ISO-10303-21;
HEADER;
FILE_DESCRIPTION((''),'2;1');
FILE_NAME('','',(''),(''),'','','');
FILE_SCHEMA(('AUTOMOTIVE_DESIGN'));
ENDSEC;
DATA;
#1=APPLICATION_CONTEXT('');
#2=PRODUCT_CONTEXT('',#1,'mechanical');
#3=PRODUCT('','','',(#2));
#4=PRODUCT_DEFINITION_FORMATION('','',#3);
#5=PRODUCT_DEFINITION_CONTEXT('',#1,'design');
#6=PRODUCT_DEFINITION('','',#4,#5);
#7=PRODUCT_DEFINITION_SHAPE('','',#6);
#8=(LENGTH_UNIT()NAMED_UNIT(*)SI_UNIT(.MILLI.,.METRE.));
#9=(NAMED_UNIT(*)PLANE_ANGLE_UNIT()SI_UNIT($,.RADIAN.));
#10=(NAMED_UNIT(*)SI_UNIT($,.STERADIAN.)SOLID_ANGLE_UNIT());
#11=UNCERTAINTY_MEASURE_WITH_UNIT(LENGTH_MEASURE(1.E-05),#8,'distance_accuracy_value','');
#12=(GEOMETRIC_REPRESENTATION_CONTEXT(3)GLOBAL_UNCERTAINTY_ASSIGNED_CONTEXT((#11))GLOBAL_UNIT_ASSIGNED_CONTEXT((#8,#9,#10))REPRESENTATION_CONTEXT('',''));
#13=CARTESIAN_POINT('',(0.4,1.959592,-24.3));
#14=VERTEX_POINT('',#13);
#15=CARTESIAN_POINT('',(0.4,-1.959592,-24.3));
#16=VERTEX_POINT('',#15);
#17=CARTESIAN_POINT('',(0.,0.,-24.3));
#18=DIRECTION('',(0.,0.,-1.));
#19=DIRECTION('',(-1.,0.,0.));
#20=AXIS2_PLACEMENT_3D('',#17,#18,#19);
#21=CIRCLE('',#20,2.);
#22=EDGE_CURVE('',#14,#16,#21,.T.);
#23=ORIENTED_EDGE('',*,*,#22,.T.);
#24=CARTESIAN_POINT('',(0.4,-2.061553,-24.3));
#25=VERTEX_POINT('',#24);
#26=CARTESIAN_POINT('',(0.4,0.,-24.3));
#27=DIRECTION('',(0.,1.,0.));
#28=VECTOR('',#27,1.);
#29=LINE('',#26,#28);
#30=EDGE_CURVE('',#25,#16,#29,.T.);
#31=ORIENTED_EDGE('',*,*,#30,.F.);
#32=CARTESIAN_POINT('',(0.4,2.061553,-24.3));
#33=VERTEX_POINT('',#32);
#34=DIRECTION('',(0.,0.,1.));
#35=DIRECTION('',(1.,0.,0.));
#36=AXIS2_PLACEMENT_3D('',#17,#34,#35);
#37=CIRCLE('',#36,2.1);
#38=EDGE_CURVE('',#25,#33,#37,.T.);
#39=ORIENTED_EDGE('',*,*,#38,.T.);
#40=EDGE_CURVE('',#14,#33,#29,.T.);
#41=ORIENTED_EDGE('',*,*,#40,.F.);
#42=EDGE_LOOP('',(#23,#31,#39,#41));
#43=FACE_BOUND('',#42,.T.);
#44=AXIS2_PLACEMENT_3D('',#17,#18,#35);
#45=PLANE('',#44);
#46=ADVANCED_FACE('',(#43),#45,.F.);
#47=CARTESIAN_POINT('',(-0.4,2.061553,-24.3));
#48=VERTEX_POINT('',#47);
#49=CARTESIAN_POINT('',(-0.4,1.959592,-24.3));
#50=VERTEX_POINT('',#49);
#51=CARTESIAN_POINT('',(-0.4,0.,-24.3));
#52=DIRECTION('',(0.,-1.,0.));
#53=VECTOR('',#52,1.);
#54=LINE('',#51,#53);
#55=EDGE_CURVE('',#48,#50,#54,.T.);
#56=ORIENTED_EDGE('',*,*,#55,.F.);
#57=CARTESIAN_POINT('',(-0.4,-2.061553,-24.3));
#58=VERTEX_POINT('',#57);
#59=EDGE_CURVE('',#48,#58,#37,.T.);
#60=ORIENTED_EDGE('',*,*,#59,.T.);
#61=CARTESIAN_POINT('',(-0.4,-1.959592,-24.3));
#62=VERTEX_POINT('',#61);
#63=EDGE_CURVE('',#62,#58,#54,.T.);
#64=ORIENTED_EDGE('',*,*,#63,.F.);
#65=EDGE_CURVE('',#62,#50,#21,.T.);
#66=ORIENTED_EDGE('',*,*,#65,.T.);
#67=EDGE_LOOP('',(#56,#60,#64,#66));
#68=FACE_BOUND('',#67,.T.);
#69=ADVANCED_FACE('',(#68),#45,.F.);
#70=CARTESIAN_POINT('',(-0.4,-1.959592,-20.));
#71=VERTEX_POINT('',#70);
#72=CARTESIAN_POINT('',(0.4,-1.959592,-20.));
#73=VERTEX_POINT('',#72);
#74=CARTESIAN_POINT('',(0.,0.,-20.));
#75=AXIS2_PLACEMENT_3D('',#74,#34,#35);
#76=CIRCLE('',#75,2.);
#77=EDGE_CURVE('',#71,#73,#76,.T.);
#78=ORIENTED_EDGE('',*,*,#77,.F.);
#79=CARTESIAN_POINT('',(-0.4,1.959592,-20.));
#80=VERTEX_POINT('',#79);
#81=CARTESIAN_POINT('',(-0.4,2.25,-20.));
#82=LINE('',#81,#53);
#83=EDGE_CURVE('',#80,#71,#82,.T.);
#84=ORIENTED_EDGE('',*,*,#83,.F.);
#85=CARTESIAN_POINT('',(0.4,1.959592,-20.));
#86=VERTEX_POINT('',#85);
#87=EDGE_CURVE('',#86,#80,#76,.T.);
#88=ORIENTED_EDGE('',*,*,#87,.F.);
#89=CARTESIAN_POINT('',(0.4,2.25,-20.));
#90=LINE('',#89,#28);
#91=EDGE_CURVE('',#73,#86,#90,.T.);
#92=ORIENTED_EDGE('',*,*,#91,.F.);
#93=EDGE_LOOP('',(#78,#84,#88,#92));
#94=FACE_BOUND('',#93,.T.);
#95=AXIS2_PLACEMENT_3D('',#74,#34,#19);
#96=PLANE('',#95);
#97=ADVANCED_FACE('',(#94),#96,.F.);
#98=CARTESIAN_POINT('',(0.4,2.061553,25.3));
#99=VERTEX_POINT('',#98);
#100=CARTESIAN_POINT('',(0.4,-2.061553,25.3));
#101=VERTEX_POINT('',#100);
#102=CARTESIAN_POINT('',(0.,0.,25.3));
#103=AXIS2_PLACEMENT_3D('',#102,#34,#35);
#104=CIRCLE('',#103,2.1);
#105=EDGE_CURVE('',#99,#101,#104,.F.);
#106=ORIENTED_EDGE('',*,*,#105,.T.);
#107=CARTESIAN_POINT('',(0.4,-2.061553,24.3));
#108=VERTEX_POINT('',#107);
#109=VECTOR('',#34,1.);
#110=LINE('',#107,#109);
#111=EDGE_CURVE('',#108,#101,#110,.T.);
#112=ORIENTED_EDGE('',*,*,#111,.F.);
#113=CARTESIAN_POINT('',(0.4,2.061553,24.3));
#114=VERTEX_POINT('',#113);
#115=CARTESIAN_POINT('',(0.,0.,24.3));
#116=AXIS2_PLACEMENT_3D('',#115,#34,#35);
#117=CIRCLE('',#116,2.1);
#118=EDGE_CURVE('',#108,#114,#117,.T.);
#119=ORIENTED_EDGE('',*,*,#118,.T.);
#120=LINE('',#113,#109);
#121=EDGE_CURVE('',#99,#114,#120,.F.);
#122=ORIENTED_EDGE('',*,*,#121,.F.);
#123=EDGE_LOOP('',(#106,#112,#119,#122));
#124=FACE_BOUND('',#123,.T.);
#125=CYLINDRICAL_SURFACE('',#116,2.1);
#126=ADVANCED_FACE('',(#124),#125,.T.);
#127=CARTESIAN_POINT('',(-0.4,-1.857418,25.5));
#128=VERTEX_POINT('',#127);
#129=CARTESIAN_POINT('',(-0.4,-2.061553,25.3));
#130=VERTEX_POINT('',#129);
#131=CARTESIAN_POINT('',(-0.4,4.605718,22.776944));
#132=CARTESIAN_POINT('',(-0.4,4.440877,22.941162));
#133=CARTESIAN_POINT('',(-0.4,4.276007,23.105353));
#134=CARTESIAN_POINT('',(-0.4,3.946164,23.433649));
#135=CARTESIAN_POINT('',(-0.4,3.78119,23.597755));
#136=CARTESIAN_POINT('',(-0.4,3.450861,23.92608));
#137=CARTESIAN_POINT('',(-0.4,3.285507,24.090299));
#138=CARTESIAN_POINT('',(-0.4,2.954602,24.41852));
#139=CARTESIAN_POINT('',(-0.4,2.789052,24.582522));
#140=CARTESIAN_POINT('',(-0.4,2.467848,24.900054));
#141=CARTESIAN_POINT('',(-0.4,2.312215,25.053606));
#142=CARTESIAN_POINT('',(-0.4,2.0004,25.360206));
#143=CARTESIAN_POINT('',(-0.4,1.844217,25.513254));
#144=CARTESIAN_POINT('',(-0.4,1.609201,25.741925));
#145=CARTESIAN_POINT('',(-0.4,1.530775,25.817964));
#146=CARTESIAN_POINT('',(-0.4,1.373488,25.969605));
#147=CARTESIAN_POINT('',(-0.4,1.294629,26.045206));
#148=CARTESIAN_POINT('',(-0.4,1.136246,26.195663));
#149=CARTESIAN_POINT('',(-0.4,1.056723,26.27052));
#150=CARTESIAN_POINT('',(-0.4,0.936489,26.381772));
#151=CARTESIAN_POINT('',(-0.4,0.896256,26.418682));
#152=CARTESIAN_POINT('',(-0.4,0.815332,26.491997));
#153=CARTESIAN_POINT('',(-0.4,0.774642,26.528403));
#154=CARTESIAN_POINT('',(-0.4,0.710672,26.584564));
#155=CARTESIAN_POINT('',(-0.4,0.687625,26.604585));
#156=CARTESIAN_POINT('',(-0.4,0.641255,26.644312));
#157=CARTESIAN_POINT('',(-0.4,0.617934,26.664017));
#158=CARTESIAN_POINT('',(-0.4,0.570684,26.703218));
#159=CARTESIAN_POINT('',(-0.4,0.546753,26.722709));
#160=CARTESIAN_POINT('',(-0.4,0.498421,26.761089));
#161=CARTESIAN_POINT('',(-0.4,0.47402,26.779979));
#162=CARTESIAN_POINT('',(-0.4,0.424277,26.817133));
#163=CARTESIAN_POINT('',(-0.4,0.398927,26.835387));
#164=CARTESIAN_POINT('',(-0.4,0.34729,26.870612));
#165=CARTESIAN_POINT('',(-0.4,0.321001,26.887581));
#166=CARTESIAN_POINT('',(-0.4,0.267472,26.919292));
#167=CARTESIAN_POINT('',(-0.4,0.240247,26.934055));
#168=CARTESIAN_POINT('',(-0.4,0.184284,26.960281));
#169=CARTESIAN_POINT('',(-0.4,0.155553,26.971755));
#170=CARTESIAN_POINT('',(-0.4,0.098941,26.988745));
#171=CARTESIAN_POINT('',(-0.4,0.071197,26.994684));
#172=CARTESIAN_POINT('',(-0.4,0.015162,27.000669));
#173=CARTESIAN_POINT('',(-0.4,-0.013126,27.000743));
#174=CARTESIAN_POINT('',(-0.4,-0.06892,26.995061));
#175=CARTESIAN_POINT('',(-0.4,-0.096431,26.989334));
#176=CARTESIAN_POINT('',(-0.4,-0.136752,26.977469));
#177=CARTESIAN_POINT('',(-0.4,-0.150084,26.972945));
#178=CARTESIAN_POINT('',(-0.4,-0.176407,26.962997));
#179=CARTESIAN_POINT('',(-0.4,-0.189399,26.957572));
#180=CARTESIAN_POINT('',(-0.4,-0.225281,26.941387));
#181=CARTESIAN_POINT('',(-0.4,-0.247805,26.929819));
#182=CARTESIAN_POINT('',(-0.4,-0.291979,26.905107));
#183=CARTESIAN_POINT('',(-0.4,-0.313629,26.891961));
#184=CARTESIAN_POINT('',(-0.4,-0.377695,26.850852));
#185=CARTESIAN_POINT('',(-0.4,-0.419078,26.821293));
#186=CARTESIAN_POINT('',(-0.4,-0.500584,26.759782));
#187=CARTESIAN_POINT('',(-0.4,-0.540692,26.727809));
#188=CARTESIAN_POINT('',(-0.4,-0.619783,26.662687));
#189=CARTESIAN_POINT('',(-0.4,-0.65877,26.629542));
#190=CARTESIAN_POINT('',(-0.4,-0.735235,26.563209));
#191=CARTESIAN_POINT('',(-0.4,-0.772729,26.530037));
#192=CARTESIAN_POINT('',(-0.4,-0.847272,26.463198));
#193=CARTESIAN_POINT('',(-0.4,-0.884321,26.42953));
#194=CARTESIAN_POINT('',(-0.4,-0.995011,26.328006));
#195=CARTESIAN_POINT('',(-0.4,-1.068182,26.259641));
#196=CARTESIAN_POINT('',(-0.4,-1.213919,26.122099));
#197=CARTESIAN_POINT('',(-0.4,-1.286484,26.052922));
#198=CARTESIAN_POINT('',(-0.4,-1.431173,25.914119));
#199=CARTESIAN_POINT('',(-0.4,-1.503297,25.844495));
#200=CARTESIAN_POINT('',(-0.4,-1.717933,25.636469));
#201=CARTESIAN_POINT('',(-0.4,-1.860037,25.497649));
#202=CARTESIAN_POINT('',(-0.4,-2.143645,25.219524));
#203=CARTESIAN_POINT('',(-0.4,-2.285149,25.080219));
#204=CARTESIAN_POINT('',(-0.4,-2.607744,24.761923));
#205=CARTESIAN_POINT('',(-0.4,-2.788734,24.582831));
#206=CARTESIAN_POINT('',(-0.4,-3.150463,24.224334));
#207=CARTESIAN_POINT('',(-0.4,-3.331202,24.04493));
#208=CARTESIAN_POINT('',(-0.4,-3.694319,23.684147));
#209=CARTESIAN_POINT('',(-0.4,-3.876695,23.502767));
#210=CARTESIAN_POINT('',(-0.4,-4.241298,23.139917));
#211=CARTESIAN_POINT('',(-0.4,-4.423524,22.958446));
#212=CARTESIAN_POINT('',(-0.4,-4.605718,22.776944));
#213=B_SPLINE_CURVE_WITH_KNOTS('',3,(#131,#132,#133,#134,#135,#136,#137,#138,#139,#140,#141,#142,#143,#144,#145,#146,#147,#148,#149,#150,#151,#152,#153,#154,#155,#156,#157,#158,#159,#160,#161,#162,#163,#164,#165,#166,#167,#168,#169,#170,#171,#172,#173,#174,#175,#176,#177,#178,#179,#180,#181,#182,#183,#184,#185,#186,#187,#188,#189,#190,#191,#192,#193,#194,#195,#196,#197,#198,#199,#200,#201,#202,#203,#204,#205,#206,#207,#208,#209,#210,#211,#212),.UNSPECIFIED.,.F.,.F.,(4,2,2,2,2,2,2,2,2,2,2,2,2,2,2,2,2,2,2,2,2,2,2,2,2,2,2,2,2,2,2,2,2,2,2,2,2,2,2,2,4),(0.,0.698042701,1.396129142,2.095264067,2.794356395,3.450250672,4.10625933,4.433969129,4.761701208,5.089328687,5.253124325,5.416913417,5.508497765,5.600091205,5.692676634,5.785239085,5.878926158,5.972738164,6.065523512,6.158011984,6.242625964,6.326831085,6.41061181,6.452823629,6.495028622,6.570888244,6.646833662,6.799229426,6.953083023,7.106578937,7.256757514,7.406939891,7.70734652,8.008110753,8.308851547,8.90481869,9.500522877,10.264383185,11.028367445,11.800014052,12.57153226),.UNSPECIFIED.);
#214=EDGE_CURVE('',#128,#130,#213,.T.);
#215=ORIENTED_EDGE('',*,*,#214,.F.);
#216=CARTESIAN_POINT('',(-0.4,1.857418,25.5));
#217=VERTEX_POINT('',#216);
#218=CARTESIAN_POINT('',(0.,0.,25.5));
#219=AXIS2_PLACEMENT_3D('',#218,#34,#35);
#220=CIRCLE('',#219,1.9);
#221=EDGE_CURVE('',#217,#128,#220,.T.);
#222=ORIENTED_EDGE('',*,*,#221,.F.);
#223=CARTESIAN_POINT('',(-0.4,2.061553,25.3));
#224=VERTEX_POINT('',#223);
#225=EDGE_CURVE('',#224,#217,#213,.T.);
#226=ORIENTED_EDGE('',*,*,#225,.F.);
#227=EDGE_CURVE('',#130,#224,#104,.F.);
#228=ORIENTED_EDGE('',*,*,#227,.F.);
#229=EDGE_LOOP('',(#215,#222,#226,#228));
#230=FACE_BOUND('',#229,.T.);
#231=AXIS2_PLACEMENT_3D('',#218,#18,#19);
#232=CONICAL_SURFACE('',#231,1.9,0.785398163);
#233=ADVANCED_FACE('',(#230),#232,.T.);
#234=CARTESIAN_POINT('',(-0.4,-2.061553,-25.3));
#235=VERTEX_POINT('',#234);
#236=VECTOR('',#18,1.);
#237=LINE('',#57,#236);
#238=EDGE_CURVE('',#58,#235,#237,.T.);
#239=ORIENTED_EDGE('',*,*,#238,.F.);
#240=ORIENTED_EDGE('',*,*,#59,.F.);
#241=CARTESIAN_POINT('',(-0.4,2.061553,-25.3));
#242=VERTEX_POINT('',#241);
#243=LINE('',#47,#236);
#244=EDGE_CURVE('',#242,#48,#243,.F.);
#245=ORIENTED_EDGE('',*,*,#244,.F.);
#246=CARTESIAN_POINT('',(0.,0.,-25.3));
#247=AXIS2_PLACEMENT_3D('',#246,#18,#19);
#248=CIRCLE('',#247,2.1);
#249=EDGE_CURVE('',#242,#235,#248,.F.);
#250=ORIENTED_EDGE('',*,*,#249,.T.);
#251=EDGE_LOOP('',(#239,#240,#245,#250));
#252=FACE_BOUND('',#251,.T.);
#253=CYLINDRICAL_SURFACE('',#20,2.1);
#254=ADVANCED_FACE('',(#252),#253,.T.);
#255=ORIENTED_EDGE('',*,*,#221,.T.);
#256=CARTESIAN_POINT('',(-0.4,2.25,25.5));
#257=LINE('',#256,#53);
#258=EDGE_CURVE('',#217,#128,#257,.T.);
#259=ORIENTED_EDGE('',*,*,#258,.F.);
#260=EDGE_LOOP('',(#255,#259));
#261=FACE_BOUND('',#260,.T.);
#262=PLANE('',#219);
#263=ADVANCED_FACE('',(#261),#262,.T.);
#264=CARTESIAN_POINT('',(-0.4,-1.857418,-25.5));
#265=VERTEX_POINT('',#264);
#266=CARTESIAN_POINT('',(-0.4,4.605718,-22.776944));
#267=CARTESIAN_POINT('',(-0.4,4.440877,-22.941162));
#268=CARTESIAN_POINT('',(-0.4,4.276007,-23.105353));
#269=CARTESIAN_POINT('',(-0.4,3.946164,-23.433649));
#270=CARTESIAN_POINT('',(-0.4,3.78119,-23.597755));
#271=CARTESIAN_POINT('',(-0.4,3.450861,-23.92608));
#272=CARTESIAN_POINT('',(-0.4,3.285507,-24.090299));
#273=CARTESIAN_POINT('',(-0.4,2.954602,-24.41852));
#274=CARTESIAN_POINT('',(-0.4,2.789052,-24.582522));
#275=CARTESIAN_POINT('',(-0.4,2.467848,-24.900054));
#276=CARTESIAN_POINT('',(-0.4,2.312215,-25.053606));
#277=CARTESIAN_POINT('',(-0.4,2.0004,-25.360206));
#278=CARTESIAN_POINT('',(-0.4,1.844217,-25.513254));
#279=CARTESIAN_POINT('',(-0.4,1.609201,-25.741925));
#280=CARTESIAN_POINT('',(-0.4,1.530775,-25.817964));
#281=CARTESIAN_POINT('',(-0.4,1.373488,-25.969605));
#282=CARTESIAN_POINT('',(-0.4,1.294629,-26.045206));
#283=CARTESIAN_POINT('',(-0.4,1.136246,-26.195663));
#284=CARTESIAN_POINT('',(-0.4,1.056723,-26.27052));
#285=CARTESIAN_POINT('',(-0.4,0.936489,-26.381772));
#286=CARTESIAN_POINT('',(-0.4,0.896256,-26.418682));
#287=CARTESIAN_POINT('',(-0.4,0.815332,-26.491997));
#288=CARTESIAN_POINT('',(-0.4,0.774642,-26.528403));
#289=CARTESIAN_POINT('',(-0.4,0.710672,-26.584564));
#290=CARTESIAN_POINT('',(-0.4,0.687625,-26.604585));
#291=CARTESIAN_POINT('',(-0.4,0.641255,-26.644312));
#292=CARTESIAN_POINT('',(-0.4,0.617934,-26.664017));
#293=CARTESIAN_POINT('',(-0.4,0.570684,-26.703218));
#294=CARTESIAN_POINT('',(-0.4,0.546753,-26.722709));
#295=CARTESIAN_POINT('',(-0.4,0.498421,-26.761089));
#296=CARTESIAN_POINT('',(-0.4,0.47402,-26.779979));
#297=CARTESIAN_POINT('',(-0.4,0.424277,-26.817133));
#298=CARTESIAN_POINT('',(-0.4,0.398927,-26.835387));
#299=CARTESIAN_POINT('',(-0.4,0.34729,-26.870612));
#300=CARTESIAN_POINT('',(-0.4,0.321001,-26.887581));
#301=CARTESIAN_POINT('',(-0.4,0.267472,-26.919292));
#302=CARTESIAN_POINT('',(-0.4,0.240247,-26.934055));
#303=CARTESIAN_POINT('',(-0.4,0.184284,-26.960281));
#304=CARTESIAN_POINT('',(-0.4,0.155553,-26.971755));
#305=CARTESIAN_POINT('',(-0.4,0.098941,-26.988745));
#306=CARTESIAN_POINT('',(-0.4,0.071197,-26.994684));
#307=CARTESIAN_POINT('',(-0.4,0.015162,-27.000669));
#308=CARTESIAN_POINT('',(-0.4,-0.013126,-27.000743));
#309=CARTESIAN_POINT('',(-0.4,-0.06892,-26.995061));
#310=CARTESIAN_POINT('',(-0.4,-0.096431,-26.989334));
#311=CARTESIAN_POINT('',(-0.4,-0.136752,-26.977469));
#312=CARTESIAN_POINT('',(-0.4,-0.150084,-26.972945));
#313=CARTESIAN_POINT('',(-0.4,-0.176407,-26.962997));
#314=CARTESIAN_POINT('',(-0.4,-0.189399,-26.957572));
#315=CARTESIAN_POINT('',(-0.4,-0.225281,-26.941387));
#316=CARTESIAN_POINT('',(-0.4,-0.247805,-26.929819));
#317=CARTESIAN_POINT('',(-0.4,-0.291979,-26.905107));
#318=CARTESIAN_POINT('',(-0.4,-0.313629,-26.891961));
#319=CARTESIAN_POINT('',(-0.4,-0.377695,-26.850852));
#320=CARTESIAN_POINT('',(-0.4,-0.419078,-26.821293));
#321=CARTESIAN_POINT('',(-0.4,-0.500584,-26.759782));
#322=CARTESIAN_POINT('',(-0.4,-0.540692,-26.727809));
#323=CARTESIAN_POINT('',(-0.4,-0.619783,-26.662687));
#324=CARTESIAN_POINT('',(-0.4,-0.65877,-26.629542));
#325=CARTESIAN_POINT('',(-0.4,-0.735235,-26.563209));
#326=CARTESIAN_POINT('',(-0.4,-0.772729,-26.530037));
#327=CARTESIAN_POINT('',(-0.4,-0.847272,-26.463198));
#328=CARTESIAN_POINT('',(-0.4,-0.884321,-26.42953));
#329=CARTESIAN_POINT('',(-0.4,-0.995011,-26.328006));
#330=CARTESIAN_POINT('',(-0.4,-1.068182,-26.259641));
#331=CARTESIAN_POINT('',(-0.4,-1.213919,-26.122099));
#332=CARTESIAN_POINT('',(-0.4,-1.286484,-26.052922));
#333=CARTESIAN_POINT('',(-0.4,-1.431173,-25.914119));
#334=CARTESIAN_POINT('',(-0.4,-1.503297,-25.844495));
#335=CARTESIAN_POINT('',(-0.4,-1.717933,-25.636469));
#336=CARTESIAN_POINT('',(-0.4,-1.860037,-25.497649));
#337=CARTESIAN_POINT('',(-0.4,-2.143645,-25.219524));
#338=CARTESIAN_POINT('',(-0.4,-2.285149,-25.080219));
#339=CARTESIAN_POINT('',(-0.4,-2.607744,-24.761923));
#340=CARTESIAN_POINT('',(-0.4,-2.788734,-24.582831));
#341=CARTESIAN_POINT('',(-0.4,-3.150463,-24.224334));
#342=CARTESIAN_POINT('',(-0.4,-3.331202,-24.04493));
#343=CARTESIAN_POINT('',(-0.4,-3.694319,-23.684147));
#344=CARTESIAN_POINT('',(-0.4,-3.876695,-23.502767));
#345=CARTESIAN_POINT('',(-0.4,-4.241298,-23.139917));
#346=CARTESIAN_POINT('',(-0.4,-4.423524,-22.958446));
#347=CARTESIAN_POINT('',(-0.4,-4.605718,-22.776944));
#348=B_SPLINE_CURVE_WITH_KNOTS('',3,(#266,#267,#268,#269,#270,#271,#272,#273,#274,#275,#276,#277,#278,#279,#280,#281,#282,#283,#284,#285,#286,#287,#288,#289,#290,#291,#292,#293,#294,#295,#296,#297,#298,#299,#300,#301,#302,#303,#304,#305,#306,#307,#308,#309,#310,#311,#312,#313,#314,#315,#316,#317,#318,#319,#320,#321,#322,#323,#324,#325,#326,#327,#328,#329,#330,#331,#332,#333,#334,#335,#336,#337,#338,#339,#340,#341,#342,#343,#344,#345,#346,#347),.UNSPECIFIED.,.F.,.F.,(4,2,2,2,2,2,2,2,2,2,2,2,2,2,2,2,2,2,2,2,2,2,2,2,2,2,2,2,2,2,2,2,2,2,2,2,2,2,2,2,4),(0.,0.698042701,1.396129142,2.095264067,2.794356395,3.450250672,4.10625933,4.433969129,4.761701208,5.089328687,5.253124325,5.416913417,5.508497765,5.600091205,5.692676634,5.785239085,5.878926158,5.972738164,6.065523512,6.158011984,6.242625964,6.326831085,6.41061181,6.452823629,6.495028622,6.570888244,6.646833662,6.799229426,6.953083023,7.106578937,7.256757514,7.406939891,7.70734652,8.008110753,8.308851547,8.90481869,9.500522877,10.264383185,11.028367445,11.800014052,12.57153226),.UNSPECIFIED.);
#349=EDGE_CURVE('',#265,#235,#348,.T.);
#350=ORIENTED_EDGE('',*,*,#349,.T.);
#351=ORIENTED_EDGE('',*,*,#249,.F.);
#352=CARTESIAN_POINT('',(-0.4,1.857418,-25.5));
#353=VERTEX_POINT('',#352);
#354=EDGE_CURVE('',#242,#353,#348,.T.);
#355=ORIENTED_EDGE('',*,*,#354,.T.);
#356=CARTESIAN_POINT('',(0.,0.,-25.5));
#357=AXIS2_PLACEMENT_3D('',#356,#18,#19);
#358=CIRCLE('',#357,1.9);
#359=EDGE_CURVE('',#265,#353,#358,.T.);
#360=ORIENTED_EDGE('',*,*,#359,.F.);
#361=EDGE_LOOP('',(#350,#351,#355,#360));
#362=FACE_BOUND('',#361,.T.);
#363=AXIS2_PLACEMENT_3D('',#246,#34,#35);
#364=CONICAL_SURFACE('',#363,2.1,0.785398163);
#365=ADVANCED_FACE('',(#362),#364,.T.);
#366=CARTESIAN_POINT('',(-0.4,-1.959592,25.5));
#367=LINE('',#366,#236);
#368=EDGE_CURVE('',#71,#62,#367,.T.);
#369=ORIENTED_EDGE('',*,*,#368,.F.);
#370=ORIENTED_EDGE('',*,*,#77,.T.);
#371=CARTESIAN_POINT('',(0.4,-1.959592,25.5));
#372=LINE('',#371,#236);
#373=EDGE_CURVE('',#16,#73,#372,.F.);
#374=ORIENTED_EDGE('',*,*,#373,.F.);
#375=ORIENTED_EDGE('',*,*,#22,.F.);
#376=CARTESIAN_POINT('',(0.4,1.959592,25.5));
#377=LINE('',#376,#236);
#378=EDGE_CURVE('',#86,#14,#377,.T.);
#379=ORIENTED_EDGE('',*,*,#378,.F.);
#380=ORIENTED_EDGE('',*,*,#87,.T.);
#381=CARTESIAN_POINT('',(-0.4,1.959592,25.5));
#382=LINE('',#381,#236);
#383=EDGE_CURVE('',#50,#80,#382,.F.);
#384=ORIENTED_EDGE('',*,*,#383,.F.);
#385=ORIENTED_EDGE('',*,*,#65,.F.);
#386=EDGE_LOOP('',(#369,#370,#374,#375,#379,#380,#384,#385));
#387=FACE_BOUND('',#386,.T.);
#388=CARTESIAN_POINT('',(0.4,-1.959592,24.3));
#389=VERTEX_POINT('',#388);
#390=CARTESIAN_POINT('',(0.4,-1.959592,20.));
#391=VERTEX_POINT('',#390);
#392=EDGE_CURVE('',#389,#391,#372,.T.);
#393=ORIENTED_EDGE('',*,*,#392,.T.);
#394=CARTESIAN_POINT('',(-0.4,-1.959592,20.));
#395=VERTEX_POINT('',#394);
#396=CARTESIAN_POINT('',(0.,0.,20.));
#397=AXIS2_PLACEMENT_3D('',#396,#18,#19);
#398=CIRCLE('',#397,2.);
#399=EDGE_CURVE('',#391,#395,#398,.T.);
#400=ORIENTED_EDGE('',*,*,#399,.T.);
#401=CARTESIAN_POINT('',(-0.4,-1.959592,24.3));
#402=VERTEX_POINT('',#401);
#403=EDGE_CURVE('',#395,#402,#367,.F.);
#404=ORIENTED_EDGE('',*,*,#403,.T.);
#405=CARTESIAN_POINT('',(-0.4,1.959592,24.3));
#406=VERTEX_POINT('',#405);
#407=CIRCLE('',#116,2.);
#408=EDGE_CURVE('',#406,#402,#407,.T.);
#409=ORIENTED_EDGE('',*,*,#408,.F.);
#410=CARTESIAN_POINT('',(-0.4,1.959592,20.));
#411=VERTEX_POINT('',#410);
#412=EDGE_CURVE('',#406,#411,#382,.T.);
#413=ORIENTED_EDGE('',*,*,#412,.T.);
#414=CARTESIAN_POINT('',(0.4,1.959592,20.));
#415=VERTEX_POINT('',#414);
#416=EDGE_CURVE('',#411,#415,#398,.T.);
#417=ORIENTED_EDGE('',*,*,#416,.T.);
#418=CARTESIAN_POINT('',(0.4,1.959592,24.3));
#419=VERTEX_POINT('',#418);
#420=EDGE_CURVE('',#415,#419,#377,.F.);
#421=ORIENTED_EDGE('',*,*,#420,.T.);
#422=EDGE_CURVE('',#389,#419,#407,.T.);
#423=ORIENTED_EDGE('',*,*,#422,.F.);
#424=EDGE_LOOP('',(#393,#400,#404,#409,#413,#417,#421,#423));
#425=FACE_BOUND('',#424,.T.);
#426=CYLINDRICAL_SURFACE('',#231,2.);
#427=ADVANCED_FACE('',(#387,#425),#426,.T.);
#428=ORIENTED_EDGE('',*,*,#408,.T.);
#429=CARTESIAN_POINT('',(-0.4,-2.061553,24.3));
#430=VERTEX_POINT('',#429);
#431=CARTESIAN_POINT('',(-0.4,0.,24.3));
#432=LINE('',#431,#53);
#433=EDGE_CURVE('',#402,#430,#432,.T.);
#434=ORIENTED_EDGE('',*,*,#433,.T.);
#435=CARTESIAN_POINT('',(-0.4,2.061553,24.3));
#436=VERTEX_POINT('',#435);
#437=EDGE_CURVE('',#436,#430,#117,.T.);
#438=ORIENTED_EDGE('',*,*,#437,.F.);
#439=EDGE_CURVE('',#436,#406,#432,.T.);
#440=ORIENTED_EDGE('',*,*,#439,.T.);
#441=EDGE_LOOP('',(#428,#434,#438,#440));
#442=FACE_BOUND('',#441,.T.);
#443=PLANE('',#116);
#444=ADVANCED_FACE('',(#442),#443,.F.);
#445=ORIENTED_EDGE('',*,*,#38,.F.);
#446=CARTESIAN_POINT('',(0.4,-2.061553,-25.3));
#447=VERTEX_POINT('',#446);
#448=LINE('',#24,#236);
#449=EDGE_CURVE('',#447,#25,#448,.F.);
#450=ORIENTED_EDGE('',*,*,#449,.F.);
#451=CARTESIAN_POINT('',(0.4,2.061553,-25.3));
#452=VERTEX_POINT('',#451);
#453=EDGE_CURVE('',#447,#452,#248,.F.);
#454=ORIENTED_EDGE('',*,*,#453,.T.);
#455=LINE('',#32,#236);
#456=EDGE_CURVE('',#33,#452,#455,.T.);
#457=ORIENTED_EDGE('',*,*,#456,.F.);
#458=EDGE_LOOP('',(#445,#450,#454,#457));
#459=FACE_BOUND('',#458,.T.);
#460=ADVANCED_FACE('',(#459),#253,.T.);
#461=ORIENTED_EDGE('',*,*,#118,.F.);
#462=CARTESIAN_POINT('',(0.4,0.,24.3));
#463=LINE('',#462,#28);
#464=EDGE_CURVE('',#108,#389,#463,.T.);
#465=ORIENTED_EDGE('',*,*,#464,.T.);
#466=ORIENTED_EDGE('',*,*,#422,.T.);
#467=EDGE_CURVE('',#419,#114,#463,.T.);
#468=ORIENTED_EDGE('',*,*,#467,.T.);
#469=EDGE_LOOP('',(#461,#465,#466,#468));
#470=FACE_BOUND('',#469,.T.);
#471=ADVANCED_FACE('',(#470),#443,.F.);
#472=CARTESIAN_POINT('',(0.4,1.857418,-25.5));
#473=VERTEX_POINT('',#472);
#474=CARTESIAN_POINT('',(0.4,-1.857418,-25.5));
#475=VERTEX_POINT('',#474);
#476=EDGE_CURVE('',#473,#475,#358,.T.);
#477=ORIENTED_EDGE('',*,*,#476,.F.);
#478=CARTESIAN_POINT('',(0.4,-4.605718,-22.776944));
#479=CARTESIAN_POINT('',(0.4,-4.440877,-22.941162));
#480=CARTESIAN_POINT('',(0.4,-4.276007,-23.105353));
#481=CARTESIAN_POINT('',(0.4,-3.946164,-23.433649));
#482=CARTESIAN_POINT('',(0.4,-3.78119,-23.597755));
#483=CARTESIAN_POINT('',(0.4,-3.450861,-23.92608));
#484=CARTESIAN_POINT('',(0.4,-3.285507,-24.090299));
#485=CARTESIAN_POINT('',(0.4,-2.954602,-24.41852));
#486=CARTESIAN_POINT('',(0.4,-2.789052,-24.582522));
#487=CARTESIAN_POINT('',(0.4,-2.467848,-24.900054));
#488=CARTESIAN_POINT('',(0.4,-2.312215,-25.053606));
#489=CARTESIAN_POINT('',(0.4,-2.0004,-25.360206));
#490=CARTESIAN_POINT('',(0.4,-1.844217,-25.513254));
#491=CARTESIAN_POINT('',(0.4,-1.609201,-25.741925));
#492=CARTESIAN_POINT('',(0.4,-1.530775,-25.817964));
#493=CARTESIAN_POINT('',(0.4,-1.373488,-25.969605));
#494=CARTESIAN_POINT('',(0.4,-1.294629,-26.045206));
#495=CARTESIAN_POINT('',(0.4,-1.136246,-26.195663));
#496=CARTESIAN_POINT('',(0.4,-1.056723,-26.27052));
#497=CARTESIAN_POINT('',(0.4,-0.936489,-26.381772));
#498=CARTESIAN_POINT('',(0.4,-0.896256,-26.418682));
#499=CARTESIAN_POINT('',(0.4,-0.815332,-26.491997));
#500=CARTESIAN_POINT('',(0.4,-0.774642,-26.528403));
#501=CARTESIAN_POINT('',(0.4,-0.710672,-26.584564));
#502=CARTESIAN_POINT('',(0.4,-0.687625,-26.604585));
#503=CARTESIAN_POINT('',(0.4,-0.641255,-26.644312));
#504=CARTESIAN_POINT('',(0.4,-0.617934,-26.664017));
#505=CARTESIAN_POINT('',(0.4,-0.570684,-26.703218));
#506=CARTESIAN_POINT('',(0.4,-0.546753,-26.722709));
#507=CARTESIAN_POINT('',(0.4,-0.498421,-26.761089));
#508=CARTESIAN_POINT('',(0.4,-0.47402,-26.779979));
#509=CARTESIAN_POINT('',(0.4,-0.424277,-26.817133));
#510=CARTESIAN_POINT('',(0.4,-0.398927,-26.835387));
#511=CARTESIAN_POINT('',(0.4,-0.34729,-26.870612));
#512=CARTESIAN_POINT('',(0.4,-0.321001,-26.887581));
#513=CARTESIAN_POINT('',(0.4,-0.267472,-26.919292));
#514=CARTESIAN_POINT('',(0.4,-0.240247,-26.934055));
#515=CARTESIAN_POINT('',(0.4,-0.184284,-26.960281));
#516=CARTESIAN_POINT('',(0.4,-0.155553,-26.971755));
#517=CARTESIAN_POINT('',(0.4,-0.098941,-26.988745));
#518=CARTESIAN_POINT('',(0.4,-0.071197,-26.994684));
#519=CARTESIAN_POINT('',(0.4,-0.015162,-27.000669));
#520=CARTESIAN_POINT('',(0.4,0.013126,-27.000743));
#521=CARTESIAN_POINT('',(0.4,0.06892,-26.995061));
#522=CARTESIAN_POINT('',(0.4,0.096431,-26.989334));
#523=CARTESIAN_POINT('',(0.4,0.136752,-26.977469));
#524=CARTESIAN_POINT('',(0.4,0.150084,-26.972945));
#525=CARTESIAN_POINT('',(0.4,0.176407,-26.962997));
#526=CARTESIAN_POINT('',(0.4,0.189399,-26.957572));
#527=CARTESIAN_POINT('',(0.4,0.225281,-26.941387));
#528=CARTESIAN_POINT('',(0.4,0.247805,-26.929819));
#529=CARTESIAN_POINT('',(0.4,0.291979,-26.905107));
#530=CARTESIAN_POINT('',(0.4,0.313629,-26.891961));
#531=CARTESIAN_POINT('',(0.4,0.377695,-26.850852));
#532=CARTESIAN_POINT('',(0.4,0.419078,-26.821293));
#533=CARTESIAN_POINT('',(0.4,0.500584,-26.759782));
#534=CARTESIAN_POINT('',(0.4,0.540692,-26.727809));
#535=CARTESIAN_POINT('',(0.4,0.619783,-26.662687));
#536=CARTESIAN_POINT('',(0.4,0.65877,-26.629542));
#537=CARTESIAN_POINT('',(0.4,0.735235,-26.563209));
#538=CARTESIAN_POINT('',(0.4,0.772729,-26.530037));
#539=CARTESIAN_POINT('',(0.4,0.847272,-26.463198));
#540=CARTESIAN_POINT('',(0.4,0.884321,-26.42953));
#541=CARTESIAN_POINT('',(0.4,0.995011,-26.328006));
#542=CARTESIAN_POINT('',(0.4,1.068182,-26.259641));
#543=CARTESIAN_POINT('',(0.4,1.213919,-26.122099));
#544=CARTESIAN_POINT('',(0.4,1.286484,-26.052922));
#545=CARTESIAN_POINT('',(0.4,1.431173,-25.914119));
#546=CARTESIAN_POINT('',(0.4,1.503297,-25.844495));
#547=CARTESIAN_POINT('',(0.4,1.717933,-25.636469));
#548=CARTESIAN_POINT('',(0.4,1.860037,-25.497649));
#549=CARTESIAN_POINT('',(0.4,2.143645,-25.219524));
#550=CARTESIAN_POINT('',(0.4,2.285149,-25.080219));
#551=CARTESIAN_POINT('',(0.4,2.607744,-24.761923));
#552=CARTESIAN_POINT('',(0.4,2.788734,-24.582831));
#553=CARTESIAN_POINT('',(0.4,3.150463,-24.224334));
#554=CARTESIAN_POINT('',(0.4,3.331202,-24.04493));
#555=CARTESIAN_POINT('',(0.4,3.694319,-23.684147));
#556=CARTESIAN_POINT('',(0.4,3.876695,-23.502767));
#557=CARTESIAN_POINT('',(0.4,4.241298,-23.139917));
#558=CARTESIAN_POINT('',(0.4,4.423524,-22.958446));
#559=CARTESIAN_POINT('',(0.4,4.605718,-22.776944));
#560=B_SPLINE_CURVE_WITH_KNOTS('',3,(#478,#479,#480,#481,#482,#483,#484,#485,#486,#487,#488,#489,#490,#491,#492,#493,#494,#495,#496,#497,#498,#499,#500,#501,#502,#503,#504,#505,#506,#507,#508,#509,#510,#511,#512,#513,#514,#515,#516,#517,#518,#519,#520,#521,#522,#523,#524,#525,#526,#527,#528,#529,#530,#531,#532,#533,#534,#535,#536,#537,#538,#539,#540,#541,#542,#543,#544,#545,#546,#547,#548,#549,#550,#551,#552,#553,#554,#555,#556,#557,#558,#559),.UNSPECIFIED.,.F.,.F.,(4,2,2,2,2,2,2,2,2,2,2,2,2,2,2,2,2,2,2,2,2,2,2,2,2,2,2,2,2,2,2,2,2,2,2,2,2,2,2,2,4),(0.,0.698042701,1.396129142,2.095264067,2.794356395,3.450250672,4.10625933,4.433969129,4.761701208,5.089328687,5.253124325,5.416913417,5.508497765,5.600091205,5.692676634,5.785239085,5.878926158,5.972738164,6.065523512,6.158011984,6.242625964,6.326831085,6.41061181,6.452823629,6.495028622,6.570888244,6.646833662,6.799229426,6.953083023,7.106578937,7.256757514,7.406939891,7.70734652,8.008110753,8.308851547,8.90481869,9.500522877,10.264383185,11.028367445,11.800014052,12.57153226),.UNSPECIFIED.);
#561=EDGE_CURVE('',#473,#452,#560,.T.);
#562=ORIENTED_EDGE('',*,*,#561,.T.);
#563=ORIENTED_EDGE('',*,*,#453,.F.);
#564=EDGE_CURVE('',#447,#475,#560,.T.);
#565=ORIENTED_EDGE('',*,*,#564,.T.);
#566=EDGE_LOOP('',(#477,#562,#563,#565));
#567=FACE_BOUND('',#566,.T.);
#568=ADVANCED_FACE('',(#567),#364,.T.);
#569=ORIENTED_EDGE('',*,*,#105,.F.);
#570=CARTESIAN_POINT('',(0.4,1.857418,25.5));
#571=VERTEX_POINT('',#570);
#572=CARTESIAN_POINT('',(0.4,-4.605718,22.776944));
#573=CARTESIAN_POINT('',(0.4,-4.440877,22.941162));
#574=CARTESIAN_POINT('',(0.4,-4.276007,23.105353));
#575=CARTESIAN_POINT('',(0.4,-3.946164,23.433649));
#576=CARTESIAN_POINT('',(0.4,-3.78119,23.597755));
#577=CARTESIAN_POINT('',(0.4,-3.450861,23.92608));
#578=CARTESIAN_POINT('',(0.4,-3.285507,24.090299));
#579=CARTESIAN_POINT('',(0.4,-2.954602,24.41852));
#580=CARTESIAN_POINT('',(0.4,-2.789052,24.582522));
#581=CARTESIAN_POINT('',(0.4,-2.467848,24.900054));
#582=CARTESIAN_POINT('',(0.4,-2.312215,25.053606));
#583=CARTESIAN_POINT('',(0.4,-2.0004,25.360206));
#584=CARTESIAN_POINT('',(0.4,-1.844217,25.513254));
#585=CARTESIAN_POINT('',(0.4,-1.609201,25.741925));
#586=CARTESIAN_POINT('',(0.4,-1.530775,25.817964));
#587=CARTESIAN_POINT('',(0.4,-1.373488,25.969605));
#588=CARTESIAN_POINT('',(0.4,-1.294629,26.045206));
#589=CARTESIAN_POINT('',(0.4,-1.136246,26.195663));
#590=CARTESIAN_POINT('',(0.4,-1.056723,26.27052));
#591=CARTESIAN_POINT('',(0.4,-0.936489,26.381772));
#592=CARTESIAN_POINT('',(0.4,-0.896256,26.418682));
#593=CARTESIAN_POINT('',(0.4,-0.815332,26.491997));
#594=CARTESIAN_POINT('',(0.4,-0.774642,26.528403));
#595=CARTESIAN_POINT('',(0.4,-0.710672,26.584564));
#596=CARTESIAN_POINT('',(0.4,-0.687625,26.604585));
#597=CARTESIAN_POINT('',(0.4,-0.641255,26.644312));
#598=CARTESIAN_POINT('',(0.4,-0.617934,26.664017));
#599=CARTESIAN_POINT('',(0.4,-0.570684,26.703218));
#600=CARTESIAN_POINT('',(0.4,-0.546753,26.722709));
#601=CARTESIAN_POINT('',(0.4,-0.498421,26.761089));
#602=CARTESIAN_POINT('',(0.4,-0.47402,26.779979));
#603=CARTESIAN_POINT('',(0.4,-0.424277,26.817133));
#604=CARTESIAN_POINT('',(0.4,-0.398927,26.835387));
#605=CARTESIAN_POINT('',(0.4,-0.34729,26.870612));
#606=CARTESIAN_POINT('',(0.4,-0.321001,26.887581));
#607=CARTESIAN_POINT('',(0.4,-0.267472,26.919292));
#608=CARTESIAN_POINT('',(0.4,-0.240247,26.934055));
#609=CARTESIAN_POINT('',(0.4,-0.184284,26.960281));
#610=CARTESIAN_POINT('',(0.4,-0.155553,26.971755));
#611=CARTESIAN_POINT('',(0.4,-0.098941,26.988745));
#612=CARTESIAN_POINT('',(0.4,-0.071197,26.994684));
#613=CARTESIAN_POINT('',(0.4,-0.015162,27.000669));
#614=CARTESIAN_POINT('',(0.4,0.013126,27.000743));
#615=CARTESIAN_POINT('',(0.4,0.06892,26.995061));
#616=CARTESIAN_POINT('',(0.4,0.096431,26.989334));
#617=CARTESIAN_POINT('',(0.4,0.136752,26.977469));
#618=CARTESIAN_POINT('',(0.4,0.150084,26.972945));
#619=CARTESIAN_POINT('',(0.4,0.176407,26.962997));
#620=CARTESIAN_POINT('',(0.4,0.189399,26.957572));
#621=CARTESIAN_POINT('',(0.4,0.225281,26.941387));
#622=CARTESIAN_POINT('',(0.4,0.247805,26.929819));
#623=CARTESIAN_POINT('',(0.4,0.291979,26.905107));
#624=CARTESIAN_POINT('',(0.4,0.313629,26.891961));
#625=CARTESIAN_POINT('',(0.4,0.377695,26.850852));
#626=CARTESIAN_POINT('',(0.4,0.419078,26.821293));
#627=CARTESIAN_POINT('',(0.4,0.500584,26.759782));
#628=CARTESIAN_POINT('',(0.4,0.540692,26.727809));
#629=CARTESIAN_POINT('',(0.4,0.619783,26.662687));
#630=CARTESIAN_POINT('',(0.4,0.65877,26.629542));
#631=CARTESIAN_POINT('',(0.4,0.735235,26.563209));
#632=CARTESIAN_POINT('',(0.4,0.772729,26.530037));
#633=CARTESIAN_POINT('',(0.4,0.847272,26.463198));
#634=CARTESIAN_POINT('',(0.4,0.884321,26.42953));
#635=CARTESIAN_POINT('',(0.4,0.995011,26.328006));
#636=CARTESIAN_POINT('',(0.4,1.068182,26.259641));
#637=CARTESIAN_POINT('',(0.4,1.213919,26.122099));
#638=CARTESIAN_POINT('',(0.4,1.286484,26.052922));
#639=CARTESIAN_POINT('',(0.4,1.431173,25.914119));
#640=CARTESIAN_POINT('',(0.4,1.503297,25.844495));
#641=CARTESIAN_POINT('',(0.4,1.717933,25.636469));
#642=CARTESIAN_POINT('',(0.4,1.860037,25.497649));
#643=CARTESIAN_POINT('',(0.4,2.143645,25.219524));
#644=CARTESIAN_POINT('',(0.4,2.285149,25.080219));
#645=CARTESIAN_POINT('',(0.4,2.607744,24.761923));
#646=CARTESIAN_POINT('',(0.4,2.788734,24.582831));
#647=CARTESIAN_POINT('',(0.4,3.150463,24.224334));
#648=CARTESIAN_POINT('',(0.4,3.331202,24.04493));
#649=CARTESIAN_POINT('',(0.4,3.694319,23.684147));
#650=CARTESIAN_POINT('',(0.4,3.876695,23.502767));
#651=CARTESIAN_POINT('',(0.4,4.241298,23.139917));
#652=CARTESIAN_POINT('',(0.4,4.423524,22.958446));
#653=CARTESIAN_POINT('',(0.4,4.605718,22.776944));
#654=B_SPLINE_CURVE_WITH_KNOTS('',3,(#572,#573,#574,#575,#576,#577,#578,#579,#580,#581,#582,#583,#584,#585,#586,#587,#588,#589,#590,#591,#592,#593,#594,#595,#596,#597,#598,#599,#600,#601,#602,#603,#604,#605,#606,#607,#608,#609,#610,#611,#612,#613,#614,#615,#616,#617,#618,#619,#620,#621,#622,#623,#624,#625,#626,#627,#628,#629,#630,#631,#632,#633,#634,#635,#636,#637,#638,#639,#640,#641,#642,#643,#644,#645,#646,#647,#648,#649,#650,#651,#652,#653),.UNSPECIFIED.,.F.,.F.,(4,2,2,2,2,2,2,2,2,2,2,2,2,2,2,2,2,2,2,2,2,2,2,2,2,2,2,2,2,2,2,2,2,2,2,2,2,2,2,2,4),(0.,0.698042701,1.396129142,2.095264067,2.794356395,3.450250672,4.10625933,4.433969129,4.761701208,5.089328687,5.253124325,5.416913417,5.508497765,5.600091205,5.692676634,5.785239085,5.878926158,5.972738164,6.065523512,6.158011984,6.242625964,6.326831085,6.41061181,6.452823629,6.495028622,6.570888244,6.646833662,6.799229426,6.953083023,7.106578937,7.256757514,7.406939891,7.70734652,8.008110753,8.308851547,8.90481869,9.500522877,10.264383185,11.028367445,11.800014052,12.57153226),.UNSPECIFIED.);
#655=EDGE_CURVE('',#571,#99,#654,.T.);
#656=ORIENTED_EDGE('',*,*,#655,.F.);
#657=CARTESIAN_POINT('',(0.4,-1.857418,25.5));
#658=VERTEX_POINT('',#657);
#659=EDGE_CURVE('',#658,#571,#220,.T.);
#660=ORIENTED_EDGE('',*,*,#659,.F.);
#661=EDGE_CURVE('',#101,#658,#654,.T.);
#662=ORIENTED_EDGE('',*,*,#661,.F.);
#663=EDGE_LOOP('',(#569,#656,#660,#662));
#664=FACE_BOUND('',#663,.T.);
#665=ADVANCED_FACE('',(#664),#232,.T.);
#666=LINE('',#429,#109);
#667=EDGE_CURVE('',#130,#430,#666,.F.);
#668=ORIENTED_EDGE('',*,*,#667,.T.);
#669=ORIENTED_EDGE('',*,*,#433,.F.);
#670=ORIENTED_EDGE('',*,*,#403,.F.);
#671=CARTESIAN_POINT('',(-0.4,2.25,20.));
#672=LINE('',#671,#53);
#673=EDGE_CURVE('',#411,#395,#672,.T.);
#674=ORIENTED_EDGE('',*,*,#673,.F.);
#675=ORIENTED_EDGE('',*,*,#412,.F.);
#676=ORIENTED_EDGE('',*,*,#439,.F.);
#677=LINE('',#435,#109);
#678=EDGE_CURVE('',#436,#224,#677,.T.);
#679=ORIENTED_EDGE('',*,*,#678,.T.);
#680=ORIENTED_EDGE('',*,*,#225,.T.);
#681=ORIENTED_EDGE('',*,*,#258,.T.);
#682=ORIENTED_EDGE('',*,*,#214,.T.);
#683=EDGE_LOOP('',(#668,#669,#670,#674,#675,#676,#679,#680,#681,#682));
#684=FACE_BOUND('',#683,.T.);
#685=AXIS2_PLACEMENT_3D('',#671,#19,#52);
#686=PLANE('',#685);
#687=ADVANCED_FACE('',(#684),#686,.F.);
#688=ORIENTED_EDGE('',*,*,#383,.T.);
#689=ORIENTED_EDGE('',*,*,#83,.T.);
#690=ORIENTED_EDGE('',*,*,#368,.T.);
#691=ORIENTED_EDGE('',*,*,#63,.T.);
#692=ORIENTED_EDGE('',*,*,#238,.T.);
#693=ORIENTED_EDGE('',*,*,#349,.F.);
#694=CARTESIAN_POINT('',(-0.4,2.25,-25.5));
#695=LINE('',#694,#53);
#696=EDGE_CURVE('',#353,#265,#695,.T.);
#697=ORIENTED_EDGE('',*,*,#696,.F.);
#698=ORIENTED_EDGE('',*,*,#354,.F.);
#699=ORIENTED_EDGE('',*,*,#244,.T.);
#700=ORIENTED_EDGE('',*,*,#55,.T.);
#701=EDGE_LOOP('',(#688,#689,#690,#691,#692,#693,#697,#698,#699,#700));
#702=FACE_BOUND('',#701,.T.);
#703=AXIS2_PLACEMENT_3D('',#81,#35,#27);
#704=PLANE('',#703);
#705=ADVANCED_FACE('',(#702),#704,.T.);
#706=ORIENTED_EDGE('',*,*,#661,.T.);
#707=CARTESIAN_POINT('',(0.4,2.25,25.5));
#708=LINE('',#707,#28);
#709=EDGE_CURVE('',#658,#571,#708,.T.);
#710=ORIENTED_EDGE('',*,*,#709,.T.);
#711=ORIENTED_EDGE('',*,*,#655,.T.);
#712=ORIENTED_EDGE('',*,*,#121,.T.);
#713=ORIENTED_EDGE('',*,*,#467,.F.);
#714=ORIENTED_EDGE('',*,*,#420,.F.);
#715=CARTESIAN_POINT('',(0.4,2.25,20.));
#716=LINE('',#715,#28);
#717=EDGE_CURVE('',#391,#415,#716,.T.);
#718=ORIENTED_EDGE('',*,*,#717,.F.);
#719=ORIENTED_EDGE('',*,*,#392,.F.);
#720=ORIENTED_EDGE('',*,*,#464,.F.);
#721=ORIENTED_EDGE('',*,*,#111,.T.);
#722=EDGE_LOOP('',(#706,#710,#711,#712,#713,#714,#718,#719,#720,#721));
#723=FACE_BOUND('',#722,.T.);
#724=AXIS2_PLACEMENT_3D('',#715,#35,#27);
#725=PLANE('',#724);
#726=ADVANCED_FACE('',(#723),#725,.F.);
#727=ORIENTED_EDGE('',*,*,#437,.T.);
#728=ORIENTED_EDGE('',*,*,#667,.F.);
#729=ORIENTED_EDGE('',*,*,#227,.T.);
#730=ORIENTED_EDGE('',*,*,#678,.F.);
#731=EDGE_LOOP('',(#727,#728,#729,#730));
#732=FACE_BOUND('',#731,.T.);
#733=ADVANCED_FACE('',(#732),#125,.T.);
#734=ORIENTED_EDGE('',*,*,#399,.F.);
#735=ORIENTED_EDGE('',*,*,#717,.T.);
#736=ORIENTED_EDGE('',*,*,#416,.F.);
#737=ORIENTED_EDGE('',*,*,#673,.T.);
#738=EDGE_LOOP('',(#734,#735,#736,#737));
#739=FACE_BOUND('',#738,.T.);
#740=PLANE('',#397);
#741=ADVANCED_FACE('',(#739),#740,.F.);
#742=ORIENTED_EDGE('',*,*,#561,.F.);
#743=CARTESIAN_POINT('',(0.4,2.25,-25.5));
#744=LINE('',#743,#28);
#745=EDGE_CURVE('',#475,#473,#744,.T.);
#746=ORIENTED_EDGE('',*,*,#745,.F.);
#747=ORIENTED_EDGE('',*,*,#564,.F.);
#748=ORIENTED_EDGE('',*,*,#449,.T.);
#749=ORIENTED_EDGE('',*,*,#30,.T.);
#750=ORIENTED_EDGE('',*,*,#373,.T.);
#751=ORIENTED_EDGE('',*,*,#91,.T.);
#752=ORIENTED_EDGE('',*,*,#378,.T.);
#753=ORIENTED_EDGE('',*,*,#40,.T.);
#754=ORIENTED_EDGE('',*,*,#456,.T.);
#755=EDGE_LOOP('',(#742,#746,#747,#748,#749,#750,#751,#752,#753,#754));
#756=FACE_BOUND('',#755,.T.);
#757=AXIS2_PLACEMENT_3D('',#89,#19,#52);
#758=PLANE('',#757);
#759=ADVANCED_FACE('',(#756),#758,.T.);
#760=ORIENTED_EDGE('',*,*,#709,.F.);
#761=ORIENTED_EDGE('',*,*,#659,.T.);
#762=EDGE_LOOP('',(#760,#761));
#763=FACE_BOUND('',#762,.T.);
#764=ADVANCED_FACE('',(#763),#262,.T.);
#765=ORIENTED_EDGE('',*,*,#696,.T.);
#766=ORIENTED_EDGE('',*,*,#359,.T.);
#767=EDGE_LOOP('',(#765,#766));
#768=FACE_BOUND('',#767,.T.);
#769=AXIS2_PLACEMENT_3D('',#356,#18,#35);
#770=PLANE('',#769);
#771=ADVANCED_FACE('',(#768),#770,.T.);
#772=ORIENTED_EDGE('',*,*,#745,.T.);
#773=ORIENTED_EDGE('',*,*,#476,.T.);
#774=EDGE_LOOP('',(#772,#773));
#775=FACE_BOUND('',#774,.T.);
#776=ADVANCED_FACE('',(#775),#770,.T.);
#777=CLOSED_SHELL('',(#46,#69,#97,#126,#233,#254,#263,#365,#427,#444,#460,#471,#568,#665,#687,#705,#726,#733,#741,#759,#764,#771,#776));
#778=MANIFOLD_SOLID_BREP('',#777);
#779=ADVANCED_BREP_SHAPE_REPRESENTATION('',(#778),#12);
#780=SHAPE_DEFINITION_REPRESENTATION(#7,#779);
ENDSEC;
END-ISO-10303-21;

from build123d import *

# Parameters (mm, degrees)
SKETCH_1_R          = 2
EXTRUDE_1_DEPTH     = 25.5
SKETCH_2_R          = 2.1
EXTRUDE_2_DEPTH     = 1.2
CHAMFER_1_SIZE      = 0.2
SKETCH_3_W          = 0.8
SKETCH_3_H          = 4.5
CUT_EXTRUDE_1_DEPTH = 5.5


# Read off the part's stored shape, not the designer's step: 镜向1
with BuildPart() as part:
    # 草图1 → 凸台-拉伸1 (new body)
    with BuildSketch(Plane.XY):
        Circle(SKETCH_1_R)
    extrude(amount=EXTRUDE_1_DEPTH)

    # 草图2 → 凸台-拉伸2 (add)
    with BuildSketch(Plane.XY.offset(25.5)):
        Circle(SKETCH_2_R)
    extrude(amount=-EXTRUDE_2_DEPTH)

    # 倒角1
    chamfer_1_edges = [part.edges().sort_by_distance(p)[0] for p in [
        (-2.1, 0, 25.5),
    ]]
    chamfer(chamfer_1_edges, length=CHAMFER_1_SIZE)

    # 草图3 → 切除-拉伸1 (cut)
    with BuildSketch(Plane.XY.offset(25.5)):
        Rectangle(SKETCH_3_W, SKETCH_3_H)
    extrude(amount=-CUT_EXTRUDE_1_DEPTH, mode=Mode.SUBTRACT)

    # 镜向1: part across plane


with BuildPart() as part_1:
    add(part.part)
    add(part.part.mirror(Plane.XY))


solid = part_1.part
